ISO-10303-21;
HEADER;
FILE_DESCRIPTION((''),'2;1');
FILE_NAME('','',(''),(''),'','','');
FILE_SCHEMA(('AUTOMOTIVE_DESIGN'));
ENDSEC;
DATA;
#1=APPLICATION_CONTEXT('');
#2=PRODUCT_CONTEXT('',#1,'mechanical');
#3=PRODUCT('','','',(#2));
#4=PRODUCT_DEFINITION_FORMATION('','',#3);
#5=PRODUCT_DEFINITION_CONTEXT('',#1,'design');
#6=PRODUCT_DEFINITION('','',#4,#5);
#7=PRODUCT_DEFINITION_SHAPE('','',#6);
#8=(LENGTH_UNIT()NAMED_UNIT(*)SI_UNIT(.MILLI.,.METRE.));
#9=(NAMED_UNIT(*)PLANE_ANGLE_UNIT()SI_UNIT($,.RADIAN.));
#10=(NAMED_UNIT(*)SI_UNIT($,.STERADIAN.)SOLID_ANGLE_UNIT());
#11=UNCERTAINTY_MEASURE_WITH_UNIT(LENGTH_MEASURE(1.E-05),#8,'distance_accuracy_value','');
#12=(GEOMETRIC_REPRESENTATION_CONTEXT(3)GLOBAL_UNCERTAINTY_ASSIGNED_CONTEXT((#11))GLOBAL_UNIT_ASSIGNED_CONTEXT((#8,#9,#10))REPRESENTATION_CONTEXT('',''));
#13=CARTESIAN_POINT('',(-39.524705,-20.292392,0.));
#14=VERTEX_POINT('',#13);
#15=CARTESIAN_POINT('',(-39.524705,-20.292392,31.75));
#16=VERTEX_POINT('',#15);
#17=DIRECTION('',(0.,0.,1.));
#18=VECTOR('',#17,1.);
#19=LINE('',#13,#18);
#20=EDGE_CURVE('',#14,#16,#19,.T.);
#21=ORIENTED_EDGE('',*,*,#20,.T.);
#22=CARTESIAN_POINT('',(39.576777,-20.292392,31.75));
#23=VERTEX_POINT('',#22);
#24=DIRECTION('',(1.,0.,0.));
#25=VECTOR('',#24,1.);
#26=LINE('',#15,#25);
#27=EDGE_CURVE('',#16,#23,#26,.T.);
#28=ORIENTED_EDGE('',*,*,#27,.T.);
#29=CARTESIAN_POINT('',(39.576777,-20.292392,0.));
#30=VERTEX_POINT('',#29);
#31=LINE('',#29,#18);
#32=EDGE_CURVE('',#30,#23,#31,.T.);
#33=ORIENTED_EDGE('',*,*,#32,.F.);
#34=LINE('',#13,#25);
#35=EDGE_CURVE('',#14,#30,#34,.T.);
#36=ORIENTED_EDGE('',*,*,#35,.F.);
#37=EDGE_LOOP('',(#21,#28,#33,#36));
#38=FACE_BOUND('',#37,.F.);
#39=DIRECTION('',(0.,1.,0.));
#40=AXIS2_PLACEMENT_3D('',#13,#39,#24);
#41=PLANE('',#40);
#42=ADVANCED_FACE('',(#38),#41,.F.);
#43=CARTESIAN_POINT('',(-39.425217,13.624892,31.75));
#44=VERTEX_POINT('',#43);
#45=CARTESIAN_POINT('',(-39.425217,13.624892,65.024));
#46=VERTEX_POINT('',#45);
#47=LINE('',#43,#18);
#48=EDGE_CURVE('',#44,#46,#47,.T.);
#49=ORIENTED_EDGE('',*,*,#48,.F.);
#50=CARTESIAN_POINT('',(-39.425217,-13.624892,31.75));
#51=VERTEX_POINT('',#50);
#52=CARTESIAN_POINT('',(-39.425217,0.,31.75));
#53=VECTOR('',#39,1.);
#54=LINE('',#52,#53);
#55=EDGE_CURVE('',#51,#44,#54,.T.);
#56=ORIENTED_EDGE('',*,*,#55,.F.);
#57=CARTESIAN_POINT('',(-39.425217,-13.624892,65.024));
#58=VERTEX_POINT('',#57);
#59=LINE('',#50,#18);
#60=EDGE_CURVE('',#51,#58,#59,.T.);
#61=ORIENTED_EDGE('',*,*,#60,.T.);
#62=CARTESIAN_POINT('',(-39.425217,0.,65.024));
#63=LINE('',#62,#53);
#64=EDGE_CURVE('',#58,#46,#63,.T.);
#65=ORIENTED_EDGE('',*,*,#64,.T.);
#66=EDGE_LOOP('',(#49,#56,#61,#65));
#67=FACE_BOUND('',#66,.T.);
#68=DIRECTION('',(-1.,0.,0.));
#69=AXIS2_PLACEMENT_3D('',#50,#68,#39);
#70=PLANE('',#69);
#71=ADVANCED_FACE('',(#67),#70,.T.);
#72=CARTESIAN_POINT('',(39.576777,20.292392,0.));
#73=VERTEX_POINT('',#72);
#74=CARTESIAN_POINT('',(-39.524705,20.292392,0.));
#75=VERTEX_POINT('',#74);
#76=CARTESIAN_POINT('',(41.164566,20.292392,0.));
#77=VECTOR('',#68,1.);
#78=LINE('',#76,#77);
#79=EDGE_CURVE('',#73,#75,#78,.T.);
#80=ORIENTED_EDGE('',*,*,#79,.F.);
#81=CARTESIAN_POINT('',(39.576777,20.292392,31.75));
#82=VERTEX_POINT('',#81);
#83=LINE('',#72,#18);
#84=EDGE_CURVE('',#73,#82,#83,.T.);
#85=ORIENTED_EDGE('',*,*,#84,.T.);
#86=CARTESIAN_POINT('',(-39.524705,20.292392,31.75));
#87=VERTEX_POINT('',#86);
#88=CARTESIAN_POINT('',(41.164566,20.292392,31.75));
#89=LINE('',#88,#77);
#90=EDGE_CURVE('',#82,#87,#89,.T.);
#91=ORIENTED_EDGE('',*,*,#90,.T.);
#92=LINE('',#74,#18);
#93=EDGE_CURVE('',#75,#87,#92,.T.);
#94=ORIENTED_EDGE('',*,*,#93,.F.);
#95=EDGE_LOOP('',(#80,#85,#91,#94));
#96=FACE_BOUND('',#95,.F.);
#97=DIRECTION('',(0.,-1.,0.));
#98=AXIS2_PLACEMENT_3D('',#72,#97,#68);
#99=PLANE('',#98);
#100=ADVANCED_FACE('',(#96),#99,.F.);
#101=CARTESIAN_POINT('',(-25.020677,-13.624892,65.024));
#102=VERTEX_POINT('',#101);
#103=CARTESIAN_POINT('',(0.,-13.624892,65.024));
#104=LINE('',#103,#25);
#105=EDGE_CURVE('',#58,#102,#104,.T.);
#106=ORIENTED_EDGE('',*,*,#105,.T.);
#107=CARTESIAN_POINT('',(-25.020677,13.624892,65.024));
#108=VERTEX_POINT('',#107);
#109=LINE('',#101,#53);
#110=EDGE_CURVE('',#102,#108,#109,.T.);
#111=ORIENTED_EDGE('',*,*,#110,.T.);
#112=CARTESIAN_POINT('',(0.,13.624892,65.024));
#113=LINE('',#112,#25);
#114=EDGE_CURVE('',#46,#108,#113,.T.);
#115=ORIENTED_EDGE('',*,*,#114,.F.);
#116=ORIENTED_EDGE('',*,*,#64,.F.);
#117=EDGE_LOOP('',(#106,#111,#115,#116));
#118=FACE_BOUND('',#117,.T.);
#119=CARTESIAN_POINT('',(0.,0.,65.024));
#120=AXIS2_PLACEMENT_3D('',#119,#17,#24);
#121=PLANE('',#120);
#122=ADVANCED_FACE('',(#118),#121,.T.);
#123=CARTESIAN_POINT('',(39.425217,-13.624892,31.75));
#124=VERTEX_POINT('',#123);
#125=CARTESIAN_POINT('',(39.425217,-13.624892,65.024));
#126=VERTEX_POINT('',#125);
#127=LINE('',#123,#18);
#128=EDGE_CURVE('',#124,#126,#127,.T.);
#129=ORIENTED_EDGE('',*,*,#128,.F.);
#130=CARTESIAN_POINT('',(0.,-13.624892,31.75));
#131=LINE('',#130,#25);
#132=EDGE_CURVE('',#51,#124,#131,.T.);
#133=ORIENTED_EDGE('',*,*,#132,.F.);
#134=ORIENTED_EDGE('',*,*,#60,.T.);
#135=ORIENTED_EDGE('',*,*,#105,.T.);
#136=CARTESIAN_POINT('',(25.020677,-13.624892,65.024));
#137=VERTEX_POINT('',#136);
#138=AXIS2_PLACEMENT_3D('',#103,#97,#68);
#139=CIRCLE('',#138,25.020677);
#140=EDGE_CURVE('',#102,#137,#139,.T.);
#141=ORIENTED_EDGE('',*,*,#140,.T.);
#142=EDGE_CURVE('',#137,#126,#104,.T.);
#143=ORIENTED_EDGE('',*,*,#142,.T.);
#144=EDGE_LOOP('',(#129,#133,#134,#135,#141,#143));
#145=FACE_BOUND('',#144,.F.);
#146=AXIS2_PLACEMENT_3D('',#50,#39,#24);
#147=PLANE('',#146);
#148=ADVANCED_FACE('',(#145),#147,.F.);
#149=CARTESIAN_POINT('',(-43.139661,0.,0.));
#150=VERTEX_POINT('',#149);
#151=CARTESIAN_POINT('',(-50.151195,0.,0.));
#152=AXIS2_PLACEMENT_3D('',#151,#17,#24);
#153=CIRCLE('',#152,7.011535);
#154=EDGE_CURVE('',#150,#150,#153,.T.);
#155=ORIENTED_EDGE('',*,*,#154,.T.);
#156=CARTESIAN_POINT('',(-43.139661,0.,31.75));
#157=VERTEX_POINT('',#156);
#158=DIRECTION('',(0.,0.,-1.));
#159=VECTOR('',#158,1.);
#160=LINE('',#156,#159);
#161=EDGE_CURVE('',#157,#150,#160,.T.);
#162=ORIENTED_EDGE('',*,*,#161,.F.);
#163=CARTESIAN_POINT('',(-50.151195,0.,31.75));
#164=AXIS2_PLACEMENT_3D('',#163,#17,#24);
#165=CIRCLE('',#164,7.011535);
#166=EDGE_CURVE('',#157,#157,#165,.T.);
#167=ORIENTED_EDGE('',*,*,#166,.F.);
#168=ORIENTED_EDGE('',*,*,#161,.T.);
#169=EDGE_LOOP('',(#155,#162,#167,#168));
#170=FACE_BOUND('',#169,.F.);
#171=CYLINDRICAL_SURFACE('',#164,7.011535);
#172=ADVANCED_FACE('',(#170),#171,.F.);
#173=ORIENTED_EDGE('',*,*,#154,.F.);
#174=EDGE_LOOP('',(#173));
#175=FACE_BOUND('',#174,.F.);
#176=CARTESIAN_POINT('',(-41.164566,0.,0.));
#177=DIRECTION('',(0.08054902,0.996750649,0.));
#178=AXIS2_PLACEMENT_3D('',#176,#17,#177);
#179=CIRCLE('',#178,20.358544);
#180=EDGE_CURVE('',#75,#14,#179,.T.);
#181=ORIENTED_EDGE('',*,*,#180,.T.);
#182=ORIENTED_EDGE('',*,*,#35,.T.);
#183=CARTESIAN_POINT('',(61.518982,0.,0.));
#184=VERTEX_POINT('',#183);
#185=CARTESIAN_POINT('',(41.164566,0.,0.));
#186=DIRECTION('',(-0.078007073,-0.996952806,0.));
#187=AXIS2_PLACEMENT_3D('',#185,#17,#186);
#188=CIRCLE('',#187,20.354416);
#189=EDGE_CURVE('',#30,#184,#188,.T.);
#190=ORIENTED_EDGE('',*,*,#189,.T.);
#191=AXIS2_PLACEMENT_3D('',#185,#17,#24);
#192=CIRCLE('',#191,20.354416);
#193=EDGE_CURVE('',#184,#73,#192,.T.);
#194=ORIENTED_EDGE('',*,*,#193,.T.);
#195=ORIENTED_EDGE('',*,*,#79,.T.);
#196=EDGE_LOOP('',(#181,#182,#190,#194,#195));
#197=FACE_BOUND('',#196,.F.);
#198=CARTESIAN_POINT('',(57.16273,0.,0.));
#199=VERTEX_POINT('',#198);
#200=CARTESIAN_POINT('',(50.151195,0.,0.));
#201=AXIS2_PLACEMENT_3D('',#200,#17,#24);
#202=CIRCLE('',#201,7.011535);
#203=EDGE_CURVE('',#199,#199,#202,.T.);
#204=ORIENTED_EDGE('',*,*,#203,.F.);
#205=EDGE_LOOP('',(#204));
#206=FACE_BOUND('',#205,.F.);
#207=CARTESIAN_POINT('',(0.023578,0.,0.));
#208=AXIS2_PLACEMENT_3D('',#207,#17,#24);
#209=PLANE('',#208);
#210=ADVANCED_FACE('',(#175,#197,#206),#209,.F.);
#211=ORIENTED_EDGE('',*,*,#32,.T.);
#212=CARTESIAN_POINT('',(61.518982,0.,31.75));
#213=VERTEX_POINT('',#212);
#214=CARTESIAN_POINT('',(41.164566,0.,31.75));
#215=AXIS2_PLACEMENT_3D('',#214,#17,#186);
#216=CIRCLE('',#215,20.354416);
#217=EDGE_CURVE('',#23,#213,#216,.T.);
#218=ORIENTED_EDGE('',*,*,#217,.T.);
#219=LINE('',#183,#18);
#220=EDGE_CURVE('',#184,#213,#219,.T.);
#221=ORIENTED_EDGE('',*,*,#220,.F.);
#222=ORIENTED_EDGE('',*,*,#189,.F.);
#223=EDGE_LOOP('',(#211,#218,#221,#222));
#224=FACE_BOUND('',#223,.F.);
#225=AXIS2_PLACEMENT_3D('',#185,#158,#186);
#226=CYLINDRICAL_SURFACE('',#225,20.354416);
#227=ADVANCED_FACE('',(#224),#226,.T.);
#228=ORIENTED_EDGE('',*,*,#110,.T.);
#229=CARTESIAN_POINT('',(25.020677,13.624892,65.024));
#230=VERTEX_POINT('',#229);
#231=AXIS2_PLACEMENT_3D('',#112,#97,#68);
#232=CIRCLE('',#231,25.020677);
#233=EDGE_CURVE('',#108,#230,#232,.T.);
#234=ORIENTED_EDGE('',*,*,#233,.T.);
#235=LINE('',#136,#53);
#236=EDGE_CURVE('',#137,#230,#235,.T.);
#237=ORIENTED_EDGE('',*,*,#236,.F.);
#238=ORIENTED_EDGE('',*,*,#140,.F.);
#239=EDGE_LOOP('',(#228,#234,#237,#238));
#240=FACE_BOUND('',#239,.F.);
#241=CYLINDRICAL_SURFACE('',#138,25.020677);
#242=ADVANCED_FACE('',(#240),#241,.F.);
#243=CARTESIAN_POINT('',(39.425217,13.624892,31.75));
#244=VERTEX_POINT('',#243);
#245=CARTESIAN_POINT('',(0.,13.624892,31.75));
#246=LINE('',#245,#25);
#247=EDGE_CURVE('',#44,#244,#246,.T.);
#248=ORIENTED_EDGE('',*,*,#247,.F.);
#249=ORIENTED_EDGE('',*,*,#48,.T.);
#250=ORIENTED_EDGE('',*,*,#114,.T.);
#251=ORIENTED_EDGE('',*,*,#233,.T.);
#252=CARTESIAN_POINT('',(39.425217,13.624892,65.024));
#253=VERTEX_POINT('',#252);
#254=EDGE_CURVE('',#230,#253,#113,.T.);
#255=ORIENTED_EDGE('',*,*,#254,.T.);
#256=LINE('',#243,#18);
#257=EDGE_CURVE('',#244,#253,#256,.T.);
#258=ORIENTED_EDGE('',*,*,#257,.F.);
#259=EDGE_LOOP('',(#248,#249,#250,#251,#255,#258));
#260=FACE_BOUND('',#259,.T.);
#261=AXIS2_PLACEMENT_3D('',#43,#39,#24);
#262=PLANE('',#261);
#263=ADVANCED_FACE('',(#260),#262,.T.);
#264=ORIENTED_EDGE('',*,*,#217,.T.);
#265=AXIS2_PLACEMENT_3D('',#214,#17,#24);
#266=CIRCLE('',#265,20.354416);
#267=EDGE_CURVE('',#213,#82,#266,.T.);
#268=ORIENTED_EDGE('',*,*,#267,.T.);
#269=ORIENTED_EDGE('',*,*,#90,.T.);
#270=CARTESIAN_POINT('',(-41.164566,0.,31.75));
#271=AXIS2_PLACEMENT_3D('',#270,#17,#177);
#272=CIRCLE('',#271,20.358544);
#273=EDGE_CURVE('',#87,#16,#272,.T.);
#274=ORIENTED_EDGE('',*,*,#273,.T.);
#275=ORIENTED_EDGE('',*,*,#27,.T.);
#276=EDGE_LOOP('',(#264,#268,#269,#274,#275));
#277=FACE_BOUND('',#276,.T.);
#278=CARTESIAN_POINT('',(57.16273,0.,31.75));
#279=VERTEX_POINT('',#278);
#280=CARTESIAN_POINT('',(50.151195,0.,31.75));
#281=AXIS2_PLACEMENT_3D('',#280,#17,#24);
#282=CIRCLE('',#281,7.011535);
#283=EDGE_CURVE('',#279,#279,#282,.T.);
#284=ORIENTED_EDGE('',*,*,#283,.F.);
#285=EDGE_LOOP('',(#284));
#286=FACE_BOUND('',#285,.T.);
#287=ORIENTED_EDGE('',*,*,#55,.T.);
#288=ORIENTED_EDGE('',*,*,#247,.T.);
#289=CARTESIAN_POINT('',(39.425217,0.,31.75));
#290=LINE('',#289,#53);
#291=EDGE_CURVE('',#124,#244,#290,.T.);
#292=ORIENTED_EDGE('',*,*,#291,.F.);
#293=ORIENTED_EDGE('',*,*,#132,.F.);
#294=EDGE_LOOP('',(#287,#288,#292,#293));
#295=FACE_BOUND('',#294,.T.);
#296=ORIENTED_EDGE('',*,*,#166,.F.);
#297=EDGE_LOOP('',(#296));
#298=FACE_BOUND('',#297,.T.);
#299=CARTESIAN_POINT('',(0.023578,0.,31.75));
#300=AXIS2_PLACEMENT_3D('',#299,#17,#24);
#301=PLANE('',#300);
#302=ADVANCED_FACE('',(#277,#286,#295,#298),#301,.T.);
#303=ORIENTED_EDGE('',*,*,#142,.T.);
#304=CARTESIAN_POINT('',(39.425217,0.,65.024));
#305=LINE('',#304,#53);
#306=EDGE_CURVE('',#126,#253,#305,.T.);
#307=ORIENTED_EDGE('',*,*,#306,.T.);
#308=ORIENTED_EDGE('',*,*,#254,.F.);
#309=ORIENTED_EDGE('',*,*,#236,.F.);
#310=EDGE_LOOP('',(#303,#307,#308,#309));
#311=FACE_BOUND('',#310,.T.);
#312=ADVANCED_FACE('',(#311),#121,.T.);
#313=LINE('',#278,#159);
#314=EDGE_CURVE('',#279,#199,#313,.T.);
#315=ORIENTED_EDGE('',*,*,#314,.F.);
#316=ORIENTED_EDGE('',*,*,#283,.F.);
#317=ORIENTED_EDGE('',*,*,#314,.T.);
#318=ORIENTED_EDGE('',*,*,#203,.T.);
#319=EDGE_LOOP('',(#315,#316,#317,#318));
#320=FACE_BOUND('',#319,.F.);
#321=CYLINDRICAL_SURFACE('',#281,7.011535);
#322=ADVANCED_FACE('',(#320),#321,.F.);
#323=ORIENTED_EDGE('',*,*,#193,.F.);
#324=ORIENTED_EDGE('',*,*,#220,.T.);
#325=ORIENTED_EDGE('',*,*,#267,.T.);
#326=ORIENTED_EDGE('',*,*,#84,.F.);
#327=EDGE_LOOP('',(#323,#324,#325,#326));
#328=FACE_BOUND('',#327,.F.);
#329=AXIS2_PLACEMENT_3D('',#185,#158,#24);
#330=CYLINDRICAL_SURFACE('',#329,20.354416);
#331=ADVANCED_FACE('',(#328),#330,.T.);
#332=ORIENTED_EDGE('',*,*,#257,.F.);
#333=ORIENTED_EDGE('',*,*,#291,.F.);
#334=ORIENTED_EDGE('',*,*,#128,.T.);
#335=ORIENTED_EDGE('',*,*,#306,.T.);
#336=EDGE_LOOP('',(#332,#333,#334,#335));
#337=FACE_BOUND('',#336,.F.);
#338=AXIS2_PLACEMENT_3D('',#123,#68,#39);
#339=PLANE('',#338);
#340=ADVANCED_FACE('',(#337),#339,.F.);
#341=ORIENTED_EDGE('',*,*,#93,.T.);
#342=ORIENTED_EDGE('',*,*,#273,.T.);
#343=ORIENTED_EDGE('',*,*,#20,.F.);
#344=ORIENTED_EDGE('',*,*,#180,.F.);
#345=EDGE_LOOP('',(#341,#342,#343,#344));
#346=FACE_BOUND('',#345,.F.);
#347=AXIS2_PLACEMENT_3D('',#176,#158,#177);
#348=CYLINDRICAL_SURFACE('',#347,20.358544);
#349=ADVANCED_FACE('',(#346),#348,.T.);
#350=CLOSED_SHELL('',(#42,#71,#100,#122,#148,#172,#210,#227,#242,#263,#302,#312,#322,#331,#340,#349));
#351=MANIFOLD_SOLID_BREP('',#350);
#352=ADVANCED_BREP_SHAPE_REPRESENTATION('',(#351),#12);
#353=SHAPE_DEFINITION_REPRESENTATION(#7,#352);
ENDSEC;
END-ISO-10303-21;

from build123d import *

# Parameters (mm, degrees)
F1_DEPTH = 31.75
F2_R     = 7.0115347254
F3_DEPTH = 31.751
F4_W     = 78.8504332304
F4_H     = 27.2497832775
F5_DEPTH = 33.274
F7_DEPTH = 33.9844357044


# Not quite as in the source:
# - a feature of the source that left no trace in its solid (it failed there, or was rolled back) is left out


with BuildPart() as f1:
    # F0 (on Top) → F1 (new body)
    with BuildSketch(Plane.XY):
        with BuildLine():
            Line((39.576777419, 20.2923920006), (-39.5247050543, 20.2923920006))
            ThreePointArc((-39.5247050543, 20.2923920006), (-26.2003502762, 13.8037157784), (-20.8060217658, 0))
            ThreePointArc((-20.8060217658, 0), (-26.2003502762, -13.8037157784), (-39.5247050543, -20.2923920006))
            Line((-39.5247050543, -20.2923920006), (39.576777419, -20.2923920006))
            ThreePointArc((39.576777419, -20.2923920006), (20.8101499679, 0), (39.576777419, 20.2923920006))
        make_face()
        with BuildLine():
            Line((-39.5247050543, 20.2923920006), (-41.1645658314, 20.2923920006))
            Line((-41.1645658314, 20.2923920006), (-41.1645658314, -20.2923920006))
            Line((-41.1645658314, -20.2923920006), (-39.5247050543, -20.2923920006))
            ThreePointArc((-39.5247050543, -20.2923920006), (-26.2003502762, -13.8037157784), (-20.8060217658, 0))
            ThreePointArc((-20.8060217658, 0), (-26.2003502762, 13.8037157784), (-39.5247050543, 20.2923920006))
        make_face()
        with BuildLine():
            Line((-41.1645658314, -20.2923920006), (-41.1645658314, 20.2923920006))
            Line((-41.1645658314, 20.2923920006), (-39.5247050543, 20.2923920006))
            ThreePointArc((-39.5247050543, 20.2923920006), (-61.5231098971, 0), (-39.5247050543, -20.2923920006))
            Line((-39.5247050543, -20.2923920006), (-41.1645658314, -20.2923920006))
        make_face()
        with BuildLine():
            Line((41.1645658314, 20.2923920006), (39.576777419, 20.2923920006))
            ThreePointArc((39.576777419, 20.2923920006), (20.8101499679, 0), (39.576777419, -20.2923920006))
            Line((39.576777419, -20.2923920006), (41.1645658314, -20.2923920006))
            Line((41.1645658314, -20.2923920006), (41.1645658314, 20.2923920006))
        make_face()
        with BuildLine():
            ThreePointArc((61.518981695, 0), (54.9845466472, 14.9435730466), (39.576777419, 20.2923920006))
            Line((39.576777419, 20.2923920006), (41.1645658314, 20.2923920006))
            Line((41.1645658314, 20.2923920006), (41.1645658314, -20.2923920006))
            Line((41.1645658314, -20.2923920006), (39.576777419, -20.2923920006))
            ThreePointArc((39.576777419, -20.2923920006), (54.9845466472, -14.9435730466), (61.518981695, 0))
        make_face()
    extrude(amount=F1_DEPTH)

    # F2 (on face) → F3 (cut, through all)
    with BuildSketch(Plane.XY.offset(31.75)):
        with Locations((50.1511953771, 0)):
            Circle(F2_R)
        with Locations((-50.1511953771, 0)):
            Circle(F2_R)
    extrude(amount=-F3_DEPTH, mode=Mode.SUBTRACT)

    # F4 (on face) → F5 (join)
    with BuildSketch(Plane.XY.offset(31.75)):
        Rectangle(F4_W, F4_H)
    extrude(amount=F5_DEPTH)

    # F6 (on face) → F7 (cut, through all)
    with BuildSketch(Plane.XZ.offset(13.6248916388)):
        with BuildLine():
            ThreePointArc((-25.020677247, 65.024), (0, 40.003322753), (25.020677247, 65.024))
            Line((25.020677247, 65.024), (-25.020677247, 65.024))
        make_face()
    extrude(amount=-F7_DEPTH, mode=Mode.SUBTRACT)


solid = f1.part
